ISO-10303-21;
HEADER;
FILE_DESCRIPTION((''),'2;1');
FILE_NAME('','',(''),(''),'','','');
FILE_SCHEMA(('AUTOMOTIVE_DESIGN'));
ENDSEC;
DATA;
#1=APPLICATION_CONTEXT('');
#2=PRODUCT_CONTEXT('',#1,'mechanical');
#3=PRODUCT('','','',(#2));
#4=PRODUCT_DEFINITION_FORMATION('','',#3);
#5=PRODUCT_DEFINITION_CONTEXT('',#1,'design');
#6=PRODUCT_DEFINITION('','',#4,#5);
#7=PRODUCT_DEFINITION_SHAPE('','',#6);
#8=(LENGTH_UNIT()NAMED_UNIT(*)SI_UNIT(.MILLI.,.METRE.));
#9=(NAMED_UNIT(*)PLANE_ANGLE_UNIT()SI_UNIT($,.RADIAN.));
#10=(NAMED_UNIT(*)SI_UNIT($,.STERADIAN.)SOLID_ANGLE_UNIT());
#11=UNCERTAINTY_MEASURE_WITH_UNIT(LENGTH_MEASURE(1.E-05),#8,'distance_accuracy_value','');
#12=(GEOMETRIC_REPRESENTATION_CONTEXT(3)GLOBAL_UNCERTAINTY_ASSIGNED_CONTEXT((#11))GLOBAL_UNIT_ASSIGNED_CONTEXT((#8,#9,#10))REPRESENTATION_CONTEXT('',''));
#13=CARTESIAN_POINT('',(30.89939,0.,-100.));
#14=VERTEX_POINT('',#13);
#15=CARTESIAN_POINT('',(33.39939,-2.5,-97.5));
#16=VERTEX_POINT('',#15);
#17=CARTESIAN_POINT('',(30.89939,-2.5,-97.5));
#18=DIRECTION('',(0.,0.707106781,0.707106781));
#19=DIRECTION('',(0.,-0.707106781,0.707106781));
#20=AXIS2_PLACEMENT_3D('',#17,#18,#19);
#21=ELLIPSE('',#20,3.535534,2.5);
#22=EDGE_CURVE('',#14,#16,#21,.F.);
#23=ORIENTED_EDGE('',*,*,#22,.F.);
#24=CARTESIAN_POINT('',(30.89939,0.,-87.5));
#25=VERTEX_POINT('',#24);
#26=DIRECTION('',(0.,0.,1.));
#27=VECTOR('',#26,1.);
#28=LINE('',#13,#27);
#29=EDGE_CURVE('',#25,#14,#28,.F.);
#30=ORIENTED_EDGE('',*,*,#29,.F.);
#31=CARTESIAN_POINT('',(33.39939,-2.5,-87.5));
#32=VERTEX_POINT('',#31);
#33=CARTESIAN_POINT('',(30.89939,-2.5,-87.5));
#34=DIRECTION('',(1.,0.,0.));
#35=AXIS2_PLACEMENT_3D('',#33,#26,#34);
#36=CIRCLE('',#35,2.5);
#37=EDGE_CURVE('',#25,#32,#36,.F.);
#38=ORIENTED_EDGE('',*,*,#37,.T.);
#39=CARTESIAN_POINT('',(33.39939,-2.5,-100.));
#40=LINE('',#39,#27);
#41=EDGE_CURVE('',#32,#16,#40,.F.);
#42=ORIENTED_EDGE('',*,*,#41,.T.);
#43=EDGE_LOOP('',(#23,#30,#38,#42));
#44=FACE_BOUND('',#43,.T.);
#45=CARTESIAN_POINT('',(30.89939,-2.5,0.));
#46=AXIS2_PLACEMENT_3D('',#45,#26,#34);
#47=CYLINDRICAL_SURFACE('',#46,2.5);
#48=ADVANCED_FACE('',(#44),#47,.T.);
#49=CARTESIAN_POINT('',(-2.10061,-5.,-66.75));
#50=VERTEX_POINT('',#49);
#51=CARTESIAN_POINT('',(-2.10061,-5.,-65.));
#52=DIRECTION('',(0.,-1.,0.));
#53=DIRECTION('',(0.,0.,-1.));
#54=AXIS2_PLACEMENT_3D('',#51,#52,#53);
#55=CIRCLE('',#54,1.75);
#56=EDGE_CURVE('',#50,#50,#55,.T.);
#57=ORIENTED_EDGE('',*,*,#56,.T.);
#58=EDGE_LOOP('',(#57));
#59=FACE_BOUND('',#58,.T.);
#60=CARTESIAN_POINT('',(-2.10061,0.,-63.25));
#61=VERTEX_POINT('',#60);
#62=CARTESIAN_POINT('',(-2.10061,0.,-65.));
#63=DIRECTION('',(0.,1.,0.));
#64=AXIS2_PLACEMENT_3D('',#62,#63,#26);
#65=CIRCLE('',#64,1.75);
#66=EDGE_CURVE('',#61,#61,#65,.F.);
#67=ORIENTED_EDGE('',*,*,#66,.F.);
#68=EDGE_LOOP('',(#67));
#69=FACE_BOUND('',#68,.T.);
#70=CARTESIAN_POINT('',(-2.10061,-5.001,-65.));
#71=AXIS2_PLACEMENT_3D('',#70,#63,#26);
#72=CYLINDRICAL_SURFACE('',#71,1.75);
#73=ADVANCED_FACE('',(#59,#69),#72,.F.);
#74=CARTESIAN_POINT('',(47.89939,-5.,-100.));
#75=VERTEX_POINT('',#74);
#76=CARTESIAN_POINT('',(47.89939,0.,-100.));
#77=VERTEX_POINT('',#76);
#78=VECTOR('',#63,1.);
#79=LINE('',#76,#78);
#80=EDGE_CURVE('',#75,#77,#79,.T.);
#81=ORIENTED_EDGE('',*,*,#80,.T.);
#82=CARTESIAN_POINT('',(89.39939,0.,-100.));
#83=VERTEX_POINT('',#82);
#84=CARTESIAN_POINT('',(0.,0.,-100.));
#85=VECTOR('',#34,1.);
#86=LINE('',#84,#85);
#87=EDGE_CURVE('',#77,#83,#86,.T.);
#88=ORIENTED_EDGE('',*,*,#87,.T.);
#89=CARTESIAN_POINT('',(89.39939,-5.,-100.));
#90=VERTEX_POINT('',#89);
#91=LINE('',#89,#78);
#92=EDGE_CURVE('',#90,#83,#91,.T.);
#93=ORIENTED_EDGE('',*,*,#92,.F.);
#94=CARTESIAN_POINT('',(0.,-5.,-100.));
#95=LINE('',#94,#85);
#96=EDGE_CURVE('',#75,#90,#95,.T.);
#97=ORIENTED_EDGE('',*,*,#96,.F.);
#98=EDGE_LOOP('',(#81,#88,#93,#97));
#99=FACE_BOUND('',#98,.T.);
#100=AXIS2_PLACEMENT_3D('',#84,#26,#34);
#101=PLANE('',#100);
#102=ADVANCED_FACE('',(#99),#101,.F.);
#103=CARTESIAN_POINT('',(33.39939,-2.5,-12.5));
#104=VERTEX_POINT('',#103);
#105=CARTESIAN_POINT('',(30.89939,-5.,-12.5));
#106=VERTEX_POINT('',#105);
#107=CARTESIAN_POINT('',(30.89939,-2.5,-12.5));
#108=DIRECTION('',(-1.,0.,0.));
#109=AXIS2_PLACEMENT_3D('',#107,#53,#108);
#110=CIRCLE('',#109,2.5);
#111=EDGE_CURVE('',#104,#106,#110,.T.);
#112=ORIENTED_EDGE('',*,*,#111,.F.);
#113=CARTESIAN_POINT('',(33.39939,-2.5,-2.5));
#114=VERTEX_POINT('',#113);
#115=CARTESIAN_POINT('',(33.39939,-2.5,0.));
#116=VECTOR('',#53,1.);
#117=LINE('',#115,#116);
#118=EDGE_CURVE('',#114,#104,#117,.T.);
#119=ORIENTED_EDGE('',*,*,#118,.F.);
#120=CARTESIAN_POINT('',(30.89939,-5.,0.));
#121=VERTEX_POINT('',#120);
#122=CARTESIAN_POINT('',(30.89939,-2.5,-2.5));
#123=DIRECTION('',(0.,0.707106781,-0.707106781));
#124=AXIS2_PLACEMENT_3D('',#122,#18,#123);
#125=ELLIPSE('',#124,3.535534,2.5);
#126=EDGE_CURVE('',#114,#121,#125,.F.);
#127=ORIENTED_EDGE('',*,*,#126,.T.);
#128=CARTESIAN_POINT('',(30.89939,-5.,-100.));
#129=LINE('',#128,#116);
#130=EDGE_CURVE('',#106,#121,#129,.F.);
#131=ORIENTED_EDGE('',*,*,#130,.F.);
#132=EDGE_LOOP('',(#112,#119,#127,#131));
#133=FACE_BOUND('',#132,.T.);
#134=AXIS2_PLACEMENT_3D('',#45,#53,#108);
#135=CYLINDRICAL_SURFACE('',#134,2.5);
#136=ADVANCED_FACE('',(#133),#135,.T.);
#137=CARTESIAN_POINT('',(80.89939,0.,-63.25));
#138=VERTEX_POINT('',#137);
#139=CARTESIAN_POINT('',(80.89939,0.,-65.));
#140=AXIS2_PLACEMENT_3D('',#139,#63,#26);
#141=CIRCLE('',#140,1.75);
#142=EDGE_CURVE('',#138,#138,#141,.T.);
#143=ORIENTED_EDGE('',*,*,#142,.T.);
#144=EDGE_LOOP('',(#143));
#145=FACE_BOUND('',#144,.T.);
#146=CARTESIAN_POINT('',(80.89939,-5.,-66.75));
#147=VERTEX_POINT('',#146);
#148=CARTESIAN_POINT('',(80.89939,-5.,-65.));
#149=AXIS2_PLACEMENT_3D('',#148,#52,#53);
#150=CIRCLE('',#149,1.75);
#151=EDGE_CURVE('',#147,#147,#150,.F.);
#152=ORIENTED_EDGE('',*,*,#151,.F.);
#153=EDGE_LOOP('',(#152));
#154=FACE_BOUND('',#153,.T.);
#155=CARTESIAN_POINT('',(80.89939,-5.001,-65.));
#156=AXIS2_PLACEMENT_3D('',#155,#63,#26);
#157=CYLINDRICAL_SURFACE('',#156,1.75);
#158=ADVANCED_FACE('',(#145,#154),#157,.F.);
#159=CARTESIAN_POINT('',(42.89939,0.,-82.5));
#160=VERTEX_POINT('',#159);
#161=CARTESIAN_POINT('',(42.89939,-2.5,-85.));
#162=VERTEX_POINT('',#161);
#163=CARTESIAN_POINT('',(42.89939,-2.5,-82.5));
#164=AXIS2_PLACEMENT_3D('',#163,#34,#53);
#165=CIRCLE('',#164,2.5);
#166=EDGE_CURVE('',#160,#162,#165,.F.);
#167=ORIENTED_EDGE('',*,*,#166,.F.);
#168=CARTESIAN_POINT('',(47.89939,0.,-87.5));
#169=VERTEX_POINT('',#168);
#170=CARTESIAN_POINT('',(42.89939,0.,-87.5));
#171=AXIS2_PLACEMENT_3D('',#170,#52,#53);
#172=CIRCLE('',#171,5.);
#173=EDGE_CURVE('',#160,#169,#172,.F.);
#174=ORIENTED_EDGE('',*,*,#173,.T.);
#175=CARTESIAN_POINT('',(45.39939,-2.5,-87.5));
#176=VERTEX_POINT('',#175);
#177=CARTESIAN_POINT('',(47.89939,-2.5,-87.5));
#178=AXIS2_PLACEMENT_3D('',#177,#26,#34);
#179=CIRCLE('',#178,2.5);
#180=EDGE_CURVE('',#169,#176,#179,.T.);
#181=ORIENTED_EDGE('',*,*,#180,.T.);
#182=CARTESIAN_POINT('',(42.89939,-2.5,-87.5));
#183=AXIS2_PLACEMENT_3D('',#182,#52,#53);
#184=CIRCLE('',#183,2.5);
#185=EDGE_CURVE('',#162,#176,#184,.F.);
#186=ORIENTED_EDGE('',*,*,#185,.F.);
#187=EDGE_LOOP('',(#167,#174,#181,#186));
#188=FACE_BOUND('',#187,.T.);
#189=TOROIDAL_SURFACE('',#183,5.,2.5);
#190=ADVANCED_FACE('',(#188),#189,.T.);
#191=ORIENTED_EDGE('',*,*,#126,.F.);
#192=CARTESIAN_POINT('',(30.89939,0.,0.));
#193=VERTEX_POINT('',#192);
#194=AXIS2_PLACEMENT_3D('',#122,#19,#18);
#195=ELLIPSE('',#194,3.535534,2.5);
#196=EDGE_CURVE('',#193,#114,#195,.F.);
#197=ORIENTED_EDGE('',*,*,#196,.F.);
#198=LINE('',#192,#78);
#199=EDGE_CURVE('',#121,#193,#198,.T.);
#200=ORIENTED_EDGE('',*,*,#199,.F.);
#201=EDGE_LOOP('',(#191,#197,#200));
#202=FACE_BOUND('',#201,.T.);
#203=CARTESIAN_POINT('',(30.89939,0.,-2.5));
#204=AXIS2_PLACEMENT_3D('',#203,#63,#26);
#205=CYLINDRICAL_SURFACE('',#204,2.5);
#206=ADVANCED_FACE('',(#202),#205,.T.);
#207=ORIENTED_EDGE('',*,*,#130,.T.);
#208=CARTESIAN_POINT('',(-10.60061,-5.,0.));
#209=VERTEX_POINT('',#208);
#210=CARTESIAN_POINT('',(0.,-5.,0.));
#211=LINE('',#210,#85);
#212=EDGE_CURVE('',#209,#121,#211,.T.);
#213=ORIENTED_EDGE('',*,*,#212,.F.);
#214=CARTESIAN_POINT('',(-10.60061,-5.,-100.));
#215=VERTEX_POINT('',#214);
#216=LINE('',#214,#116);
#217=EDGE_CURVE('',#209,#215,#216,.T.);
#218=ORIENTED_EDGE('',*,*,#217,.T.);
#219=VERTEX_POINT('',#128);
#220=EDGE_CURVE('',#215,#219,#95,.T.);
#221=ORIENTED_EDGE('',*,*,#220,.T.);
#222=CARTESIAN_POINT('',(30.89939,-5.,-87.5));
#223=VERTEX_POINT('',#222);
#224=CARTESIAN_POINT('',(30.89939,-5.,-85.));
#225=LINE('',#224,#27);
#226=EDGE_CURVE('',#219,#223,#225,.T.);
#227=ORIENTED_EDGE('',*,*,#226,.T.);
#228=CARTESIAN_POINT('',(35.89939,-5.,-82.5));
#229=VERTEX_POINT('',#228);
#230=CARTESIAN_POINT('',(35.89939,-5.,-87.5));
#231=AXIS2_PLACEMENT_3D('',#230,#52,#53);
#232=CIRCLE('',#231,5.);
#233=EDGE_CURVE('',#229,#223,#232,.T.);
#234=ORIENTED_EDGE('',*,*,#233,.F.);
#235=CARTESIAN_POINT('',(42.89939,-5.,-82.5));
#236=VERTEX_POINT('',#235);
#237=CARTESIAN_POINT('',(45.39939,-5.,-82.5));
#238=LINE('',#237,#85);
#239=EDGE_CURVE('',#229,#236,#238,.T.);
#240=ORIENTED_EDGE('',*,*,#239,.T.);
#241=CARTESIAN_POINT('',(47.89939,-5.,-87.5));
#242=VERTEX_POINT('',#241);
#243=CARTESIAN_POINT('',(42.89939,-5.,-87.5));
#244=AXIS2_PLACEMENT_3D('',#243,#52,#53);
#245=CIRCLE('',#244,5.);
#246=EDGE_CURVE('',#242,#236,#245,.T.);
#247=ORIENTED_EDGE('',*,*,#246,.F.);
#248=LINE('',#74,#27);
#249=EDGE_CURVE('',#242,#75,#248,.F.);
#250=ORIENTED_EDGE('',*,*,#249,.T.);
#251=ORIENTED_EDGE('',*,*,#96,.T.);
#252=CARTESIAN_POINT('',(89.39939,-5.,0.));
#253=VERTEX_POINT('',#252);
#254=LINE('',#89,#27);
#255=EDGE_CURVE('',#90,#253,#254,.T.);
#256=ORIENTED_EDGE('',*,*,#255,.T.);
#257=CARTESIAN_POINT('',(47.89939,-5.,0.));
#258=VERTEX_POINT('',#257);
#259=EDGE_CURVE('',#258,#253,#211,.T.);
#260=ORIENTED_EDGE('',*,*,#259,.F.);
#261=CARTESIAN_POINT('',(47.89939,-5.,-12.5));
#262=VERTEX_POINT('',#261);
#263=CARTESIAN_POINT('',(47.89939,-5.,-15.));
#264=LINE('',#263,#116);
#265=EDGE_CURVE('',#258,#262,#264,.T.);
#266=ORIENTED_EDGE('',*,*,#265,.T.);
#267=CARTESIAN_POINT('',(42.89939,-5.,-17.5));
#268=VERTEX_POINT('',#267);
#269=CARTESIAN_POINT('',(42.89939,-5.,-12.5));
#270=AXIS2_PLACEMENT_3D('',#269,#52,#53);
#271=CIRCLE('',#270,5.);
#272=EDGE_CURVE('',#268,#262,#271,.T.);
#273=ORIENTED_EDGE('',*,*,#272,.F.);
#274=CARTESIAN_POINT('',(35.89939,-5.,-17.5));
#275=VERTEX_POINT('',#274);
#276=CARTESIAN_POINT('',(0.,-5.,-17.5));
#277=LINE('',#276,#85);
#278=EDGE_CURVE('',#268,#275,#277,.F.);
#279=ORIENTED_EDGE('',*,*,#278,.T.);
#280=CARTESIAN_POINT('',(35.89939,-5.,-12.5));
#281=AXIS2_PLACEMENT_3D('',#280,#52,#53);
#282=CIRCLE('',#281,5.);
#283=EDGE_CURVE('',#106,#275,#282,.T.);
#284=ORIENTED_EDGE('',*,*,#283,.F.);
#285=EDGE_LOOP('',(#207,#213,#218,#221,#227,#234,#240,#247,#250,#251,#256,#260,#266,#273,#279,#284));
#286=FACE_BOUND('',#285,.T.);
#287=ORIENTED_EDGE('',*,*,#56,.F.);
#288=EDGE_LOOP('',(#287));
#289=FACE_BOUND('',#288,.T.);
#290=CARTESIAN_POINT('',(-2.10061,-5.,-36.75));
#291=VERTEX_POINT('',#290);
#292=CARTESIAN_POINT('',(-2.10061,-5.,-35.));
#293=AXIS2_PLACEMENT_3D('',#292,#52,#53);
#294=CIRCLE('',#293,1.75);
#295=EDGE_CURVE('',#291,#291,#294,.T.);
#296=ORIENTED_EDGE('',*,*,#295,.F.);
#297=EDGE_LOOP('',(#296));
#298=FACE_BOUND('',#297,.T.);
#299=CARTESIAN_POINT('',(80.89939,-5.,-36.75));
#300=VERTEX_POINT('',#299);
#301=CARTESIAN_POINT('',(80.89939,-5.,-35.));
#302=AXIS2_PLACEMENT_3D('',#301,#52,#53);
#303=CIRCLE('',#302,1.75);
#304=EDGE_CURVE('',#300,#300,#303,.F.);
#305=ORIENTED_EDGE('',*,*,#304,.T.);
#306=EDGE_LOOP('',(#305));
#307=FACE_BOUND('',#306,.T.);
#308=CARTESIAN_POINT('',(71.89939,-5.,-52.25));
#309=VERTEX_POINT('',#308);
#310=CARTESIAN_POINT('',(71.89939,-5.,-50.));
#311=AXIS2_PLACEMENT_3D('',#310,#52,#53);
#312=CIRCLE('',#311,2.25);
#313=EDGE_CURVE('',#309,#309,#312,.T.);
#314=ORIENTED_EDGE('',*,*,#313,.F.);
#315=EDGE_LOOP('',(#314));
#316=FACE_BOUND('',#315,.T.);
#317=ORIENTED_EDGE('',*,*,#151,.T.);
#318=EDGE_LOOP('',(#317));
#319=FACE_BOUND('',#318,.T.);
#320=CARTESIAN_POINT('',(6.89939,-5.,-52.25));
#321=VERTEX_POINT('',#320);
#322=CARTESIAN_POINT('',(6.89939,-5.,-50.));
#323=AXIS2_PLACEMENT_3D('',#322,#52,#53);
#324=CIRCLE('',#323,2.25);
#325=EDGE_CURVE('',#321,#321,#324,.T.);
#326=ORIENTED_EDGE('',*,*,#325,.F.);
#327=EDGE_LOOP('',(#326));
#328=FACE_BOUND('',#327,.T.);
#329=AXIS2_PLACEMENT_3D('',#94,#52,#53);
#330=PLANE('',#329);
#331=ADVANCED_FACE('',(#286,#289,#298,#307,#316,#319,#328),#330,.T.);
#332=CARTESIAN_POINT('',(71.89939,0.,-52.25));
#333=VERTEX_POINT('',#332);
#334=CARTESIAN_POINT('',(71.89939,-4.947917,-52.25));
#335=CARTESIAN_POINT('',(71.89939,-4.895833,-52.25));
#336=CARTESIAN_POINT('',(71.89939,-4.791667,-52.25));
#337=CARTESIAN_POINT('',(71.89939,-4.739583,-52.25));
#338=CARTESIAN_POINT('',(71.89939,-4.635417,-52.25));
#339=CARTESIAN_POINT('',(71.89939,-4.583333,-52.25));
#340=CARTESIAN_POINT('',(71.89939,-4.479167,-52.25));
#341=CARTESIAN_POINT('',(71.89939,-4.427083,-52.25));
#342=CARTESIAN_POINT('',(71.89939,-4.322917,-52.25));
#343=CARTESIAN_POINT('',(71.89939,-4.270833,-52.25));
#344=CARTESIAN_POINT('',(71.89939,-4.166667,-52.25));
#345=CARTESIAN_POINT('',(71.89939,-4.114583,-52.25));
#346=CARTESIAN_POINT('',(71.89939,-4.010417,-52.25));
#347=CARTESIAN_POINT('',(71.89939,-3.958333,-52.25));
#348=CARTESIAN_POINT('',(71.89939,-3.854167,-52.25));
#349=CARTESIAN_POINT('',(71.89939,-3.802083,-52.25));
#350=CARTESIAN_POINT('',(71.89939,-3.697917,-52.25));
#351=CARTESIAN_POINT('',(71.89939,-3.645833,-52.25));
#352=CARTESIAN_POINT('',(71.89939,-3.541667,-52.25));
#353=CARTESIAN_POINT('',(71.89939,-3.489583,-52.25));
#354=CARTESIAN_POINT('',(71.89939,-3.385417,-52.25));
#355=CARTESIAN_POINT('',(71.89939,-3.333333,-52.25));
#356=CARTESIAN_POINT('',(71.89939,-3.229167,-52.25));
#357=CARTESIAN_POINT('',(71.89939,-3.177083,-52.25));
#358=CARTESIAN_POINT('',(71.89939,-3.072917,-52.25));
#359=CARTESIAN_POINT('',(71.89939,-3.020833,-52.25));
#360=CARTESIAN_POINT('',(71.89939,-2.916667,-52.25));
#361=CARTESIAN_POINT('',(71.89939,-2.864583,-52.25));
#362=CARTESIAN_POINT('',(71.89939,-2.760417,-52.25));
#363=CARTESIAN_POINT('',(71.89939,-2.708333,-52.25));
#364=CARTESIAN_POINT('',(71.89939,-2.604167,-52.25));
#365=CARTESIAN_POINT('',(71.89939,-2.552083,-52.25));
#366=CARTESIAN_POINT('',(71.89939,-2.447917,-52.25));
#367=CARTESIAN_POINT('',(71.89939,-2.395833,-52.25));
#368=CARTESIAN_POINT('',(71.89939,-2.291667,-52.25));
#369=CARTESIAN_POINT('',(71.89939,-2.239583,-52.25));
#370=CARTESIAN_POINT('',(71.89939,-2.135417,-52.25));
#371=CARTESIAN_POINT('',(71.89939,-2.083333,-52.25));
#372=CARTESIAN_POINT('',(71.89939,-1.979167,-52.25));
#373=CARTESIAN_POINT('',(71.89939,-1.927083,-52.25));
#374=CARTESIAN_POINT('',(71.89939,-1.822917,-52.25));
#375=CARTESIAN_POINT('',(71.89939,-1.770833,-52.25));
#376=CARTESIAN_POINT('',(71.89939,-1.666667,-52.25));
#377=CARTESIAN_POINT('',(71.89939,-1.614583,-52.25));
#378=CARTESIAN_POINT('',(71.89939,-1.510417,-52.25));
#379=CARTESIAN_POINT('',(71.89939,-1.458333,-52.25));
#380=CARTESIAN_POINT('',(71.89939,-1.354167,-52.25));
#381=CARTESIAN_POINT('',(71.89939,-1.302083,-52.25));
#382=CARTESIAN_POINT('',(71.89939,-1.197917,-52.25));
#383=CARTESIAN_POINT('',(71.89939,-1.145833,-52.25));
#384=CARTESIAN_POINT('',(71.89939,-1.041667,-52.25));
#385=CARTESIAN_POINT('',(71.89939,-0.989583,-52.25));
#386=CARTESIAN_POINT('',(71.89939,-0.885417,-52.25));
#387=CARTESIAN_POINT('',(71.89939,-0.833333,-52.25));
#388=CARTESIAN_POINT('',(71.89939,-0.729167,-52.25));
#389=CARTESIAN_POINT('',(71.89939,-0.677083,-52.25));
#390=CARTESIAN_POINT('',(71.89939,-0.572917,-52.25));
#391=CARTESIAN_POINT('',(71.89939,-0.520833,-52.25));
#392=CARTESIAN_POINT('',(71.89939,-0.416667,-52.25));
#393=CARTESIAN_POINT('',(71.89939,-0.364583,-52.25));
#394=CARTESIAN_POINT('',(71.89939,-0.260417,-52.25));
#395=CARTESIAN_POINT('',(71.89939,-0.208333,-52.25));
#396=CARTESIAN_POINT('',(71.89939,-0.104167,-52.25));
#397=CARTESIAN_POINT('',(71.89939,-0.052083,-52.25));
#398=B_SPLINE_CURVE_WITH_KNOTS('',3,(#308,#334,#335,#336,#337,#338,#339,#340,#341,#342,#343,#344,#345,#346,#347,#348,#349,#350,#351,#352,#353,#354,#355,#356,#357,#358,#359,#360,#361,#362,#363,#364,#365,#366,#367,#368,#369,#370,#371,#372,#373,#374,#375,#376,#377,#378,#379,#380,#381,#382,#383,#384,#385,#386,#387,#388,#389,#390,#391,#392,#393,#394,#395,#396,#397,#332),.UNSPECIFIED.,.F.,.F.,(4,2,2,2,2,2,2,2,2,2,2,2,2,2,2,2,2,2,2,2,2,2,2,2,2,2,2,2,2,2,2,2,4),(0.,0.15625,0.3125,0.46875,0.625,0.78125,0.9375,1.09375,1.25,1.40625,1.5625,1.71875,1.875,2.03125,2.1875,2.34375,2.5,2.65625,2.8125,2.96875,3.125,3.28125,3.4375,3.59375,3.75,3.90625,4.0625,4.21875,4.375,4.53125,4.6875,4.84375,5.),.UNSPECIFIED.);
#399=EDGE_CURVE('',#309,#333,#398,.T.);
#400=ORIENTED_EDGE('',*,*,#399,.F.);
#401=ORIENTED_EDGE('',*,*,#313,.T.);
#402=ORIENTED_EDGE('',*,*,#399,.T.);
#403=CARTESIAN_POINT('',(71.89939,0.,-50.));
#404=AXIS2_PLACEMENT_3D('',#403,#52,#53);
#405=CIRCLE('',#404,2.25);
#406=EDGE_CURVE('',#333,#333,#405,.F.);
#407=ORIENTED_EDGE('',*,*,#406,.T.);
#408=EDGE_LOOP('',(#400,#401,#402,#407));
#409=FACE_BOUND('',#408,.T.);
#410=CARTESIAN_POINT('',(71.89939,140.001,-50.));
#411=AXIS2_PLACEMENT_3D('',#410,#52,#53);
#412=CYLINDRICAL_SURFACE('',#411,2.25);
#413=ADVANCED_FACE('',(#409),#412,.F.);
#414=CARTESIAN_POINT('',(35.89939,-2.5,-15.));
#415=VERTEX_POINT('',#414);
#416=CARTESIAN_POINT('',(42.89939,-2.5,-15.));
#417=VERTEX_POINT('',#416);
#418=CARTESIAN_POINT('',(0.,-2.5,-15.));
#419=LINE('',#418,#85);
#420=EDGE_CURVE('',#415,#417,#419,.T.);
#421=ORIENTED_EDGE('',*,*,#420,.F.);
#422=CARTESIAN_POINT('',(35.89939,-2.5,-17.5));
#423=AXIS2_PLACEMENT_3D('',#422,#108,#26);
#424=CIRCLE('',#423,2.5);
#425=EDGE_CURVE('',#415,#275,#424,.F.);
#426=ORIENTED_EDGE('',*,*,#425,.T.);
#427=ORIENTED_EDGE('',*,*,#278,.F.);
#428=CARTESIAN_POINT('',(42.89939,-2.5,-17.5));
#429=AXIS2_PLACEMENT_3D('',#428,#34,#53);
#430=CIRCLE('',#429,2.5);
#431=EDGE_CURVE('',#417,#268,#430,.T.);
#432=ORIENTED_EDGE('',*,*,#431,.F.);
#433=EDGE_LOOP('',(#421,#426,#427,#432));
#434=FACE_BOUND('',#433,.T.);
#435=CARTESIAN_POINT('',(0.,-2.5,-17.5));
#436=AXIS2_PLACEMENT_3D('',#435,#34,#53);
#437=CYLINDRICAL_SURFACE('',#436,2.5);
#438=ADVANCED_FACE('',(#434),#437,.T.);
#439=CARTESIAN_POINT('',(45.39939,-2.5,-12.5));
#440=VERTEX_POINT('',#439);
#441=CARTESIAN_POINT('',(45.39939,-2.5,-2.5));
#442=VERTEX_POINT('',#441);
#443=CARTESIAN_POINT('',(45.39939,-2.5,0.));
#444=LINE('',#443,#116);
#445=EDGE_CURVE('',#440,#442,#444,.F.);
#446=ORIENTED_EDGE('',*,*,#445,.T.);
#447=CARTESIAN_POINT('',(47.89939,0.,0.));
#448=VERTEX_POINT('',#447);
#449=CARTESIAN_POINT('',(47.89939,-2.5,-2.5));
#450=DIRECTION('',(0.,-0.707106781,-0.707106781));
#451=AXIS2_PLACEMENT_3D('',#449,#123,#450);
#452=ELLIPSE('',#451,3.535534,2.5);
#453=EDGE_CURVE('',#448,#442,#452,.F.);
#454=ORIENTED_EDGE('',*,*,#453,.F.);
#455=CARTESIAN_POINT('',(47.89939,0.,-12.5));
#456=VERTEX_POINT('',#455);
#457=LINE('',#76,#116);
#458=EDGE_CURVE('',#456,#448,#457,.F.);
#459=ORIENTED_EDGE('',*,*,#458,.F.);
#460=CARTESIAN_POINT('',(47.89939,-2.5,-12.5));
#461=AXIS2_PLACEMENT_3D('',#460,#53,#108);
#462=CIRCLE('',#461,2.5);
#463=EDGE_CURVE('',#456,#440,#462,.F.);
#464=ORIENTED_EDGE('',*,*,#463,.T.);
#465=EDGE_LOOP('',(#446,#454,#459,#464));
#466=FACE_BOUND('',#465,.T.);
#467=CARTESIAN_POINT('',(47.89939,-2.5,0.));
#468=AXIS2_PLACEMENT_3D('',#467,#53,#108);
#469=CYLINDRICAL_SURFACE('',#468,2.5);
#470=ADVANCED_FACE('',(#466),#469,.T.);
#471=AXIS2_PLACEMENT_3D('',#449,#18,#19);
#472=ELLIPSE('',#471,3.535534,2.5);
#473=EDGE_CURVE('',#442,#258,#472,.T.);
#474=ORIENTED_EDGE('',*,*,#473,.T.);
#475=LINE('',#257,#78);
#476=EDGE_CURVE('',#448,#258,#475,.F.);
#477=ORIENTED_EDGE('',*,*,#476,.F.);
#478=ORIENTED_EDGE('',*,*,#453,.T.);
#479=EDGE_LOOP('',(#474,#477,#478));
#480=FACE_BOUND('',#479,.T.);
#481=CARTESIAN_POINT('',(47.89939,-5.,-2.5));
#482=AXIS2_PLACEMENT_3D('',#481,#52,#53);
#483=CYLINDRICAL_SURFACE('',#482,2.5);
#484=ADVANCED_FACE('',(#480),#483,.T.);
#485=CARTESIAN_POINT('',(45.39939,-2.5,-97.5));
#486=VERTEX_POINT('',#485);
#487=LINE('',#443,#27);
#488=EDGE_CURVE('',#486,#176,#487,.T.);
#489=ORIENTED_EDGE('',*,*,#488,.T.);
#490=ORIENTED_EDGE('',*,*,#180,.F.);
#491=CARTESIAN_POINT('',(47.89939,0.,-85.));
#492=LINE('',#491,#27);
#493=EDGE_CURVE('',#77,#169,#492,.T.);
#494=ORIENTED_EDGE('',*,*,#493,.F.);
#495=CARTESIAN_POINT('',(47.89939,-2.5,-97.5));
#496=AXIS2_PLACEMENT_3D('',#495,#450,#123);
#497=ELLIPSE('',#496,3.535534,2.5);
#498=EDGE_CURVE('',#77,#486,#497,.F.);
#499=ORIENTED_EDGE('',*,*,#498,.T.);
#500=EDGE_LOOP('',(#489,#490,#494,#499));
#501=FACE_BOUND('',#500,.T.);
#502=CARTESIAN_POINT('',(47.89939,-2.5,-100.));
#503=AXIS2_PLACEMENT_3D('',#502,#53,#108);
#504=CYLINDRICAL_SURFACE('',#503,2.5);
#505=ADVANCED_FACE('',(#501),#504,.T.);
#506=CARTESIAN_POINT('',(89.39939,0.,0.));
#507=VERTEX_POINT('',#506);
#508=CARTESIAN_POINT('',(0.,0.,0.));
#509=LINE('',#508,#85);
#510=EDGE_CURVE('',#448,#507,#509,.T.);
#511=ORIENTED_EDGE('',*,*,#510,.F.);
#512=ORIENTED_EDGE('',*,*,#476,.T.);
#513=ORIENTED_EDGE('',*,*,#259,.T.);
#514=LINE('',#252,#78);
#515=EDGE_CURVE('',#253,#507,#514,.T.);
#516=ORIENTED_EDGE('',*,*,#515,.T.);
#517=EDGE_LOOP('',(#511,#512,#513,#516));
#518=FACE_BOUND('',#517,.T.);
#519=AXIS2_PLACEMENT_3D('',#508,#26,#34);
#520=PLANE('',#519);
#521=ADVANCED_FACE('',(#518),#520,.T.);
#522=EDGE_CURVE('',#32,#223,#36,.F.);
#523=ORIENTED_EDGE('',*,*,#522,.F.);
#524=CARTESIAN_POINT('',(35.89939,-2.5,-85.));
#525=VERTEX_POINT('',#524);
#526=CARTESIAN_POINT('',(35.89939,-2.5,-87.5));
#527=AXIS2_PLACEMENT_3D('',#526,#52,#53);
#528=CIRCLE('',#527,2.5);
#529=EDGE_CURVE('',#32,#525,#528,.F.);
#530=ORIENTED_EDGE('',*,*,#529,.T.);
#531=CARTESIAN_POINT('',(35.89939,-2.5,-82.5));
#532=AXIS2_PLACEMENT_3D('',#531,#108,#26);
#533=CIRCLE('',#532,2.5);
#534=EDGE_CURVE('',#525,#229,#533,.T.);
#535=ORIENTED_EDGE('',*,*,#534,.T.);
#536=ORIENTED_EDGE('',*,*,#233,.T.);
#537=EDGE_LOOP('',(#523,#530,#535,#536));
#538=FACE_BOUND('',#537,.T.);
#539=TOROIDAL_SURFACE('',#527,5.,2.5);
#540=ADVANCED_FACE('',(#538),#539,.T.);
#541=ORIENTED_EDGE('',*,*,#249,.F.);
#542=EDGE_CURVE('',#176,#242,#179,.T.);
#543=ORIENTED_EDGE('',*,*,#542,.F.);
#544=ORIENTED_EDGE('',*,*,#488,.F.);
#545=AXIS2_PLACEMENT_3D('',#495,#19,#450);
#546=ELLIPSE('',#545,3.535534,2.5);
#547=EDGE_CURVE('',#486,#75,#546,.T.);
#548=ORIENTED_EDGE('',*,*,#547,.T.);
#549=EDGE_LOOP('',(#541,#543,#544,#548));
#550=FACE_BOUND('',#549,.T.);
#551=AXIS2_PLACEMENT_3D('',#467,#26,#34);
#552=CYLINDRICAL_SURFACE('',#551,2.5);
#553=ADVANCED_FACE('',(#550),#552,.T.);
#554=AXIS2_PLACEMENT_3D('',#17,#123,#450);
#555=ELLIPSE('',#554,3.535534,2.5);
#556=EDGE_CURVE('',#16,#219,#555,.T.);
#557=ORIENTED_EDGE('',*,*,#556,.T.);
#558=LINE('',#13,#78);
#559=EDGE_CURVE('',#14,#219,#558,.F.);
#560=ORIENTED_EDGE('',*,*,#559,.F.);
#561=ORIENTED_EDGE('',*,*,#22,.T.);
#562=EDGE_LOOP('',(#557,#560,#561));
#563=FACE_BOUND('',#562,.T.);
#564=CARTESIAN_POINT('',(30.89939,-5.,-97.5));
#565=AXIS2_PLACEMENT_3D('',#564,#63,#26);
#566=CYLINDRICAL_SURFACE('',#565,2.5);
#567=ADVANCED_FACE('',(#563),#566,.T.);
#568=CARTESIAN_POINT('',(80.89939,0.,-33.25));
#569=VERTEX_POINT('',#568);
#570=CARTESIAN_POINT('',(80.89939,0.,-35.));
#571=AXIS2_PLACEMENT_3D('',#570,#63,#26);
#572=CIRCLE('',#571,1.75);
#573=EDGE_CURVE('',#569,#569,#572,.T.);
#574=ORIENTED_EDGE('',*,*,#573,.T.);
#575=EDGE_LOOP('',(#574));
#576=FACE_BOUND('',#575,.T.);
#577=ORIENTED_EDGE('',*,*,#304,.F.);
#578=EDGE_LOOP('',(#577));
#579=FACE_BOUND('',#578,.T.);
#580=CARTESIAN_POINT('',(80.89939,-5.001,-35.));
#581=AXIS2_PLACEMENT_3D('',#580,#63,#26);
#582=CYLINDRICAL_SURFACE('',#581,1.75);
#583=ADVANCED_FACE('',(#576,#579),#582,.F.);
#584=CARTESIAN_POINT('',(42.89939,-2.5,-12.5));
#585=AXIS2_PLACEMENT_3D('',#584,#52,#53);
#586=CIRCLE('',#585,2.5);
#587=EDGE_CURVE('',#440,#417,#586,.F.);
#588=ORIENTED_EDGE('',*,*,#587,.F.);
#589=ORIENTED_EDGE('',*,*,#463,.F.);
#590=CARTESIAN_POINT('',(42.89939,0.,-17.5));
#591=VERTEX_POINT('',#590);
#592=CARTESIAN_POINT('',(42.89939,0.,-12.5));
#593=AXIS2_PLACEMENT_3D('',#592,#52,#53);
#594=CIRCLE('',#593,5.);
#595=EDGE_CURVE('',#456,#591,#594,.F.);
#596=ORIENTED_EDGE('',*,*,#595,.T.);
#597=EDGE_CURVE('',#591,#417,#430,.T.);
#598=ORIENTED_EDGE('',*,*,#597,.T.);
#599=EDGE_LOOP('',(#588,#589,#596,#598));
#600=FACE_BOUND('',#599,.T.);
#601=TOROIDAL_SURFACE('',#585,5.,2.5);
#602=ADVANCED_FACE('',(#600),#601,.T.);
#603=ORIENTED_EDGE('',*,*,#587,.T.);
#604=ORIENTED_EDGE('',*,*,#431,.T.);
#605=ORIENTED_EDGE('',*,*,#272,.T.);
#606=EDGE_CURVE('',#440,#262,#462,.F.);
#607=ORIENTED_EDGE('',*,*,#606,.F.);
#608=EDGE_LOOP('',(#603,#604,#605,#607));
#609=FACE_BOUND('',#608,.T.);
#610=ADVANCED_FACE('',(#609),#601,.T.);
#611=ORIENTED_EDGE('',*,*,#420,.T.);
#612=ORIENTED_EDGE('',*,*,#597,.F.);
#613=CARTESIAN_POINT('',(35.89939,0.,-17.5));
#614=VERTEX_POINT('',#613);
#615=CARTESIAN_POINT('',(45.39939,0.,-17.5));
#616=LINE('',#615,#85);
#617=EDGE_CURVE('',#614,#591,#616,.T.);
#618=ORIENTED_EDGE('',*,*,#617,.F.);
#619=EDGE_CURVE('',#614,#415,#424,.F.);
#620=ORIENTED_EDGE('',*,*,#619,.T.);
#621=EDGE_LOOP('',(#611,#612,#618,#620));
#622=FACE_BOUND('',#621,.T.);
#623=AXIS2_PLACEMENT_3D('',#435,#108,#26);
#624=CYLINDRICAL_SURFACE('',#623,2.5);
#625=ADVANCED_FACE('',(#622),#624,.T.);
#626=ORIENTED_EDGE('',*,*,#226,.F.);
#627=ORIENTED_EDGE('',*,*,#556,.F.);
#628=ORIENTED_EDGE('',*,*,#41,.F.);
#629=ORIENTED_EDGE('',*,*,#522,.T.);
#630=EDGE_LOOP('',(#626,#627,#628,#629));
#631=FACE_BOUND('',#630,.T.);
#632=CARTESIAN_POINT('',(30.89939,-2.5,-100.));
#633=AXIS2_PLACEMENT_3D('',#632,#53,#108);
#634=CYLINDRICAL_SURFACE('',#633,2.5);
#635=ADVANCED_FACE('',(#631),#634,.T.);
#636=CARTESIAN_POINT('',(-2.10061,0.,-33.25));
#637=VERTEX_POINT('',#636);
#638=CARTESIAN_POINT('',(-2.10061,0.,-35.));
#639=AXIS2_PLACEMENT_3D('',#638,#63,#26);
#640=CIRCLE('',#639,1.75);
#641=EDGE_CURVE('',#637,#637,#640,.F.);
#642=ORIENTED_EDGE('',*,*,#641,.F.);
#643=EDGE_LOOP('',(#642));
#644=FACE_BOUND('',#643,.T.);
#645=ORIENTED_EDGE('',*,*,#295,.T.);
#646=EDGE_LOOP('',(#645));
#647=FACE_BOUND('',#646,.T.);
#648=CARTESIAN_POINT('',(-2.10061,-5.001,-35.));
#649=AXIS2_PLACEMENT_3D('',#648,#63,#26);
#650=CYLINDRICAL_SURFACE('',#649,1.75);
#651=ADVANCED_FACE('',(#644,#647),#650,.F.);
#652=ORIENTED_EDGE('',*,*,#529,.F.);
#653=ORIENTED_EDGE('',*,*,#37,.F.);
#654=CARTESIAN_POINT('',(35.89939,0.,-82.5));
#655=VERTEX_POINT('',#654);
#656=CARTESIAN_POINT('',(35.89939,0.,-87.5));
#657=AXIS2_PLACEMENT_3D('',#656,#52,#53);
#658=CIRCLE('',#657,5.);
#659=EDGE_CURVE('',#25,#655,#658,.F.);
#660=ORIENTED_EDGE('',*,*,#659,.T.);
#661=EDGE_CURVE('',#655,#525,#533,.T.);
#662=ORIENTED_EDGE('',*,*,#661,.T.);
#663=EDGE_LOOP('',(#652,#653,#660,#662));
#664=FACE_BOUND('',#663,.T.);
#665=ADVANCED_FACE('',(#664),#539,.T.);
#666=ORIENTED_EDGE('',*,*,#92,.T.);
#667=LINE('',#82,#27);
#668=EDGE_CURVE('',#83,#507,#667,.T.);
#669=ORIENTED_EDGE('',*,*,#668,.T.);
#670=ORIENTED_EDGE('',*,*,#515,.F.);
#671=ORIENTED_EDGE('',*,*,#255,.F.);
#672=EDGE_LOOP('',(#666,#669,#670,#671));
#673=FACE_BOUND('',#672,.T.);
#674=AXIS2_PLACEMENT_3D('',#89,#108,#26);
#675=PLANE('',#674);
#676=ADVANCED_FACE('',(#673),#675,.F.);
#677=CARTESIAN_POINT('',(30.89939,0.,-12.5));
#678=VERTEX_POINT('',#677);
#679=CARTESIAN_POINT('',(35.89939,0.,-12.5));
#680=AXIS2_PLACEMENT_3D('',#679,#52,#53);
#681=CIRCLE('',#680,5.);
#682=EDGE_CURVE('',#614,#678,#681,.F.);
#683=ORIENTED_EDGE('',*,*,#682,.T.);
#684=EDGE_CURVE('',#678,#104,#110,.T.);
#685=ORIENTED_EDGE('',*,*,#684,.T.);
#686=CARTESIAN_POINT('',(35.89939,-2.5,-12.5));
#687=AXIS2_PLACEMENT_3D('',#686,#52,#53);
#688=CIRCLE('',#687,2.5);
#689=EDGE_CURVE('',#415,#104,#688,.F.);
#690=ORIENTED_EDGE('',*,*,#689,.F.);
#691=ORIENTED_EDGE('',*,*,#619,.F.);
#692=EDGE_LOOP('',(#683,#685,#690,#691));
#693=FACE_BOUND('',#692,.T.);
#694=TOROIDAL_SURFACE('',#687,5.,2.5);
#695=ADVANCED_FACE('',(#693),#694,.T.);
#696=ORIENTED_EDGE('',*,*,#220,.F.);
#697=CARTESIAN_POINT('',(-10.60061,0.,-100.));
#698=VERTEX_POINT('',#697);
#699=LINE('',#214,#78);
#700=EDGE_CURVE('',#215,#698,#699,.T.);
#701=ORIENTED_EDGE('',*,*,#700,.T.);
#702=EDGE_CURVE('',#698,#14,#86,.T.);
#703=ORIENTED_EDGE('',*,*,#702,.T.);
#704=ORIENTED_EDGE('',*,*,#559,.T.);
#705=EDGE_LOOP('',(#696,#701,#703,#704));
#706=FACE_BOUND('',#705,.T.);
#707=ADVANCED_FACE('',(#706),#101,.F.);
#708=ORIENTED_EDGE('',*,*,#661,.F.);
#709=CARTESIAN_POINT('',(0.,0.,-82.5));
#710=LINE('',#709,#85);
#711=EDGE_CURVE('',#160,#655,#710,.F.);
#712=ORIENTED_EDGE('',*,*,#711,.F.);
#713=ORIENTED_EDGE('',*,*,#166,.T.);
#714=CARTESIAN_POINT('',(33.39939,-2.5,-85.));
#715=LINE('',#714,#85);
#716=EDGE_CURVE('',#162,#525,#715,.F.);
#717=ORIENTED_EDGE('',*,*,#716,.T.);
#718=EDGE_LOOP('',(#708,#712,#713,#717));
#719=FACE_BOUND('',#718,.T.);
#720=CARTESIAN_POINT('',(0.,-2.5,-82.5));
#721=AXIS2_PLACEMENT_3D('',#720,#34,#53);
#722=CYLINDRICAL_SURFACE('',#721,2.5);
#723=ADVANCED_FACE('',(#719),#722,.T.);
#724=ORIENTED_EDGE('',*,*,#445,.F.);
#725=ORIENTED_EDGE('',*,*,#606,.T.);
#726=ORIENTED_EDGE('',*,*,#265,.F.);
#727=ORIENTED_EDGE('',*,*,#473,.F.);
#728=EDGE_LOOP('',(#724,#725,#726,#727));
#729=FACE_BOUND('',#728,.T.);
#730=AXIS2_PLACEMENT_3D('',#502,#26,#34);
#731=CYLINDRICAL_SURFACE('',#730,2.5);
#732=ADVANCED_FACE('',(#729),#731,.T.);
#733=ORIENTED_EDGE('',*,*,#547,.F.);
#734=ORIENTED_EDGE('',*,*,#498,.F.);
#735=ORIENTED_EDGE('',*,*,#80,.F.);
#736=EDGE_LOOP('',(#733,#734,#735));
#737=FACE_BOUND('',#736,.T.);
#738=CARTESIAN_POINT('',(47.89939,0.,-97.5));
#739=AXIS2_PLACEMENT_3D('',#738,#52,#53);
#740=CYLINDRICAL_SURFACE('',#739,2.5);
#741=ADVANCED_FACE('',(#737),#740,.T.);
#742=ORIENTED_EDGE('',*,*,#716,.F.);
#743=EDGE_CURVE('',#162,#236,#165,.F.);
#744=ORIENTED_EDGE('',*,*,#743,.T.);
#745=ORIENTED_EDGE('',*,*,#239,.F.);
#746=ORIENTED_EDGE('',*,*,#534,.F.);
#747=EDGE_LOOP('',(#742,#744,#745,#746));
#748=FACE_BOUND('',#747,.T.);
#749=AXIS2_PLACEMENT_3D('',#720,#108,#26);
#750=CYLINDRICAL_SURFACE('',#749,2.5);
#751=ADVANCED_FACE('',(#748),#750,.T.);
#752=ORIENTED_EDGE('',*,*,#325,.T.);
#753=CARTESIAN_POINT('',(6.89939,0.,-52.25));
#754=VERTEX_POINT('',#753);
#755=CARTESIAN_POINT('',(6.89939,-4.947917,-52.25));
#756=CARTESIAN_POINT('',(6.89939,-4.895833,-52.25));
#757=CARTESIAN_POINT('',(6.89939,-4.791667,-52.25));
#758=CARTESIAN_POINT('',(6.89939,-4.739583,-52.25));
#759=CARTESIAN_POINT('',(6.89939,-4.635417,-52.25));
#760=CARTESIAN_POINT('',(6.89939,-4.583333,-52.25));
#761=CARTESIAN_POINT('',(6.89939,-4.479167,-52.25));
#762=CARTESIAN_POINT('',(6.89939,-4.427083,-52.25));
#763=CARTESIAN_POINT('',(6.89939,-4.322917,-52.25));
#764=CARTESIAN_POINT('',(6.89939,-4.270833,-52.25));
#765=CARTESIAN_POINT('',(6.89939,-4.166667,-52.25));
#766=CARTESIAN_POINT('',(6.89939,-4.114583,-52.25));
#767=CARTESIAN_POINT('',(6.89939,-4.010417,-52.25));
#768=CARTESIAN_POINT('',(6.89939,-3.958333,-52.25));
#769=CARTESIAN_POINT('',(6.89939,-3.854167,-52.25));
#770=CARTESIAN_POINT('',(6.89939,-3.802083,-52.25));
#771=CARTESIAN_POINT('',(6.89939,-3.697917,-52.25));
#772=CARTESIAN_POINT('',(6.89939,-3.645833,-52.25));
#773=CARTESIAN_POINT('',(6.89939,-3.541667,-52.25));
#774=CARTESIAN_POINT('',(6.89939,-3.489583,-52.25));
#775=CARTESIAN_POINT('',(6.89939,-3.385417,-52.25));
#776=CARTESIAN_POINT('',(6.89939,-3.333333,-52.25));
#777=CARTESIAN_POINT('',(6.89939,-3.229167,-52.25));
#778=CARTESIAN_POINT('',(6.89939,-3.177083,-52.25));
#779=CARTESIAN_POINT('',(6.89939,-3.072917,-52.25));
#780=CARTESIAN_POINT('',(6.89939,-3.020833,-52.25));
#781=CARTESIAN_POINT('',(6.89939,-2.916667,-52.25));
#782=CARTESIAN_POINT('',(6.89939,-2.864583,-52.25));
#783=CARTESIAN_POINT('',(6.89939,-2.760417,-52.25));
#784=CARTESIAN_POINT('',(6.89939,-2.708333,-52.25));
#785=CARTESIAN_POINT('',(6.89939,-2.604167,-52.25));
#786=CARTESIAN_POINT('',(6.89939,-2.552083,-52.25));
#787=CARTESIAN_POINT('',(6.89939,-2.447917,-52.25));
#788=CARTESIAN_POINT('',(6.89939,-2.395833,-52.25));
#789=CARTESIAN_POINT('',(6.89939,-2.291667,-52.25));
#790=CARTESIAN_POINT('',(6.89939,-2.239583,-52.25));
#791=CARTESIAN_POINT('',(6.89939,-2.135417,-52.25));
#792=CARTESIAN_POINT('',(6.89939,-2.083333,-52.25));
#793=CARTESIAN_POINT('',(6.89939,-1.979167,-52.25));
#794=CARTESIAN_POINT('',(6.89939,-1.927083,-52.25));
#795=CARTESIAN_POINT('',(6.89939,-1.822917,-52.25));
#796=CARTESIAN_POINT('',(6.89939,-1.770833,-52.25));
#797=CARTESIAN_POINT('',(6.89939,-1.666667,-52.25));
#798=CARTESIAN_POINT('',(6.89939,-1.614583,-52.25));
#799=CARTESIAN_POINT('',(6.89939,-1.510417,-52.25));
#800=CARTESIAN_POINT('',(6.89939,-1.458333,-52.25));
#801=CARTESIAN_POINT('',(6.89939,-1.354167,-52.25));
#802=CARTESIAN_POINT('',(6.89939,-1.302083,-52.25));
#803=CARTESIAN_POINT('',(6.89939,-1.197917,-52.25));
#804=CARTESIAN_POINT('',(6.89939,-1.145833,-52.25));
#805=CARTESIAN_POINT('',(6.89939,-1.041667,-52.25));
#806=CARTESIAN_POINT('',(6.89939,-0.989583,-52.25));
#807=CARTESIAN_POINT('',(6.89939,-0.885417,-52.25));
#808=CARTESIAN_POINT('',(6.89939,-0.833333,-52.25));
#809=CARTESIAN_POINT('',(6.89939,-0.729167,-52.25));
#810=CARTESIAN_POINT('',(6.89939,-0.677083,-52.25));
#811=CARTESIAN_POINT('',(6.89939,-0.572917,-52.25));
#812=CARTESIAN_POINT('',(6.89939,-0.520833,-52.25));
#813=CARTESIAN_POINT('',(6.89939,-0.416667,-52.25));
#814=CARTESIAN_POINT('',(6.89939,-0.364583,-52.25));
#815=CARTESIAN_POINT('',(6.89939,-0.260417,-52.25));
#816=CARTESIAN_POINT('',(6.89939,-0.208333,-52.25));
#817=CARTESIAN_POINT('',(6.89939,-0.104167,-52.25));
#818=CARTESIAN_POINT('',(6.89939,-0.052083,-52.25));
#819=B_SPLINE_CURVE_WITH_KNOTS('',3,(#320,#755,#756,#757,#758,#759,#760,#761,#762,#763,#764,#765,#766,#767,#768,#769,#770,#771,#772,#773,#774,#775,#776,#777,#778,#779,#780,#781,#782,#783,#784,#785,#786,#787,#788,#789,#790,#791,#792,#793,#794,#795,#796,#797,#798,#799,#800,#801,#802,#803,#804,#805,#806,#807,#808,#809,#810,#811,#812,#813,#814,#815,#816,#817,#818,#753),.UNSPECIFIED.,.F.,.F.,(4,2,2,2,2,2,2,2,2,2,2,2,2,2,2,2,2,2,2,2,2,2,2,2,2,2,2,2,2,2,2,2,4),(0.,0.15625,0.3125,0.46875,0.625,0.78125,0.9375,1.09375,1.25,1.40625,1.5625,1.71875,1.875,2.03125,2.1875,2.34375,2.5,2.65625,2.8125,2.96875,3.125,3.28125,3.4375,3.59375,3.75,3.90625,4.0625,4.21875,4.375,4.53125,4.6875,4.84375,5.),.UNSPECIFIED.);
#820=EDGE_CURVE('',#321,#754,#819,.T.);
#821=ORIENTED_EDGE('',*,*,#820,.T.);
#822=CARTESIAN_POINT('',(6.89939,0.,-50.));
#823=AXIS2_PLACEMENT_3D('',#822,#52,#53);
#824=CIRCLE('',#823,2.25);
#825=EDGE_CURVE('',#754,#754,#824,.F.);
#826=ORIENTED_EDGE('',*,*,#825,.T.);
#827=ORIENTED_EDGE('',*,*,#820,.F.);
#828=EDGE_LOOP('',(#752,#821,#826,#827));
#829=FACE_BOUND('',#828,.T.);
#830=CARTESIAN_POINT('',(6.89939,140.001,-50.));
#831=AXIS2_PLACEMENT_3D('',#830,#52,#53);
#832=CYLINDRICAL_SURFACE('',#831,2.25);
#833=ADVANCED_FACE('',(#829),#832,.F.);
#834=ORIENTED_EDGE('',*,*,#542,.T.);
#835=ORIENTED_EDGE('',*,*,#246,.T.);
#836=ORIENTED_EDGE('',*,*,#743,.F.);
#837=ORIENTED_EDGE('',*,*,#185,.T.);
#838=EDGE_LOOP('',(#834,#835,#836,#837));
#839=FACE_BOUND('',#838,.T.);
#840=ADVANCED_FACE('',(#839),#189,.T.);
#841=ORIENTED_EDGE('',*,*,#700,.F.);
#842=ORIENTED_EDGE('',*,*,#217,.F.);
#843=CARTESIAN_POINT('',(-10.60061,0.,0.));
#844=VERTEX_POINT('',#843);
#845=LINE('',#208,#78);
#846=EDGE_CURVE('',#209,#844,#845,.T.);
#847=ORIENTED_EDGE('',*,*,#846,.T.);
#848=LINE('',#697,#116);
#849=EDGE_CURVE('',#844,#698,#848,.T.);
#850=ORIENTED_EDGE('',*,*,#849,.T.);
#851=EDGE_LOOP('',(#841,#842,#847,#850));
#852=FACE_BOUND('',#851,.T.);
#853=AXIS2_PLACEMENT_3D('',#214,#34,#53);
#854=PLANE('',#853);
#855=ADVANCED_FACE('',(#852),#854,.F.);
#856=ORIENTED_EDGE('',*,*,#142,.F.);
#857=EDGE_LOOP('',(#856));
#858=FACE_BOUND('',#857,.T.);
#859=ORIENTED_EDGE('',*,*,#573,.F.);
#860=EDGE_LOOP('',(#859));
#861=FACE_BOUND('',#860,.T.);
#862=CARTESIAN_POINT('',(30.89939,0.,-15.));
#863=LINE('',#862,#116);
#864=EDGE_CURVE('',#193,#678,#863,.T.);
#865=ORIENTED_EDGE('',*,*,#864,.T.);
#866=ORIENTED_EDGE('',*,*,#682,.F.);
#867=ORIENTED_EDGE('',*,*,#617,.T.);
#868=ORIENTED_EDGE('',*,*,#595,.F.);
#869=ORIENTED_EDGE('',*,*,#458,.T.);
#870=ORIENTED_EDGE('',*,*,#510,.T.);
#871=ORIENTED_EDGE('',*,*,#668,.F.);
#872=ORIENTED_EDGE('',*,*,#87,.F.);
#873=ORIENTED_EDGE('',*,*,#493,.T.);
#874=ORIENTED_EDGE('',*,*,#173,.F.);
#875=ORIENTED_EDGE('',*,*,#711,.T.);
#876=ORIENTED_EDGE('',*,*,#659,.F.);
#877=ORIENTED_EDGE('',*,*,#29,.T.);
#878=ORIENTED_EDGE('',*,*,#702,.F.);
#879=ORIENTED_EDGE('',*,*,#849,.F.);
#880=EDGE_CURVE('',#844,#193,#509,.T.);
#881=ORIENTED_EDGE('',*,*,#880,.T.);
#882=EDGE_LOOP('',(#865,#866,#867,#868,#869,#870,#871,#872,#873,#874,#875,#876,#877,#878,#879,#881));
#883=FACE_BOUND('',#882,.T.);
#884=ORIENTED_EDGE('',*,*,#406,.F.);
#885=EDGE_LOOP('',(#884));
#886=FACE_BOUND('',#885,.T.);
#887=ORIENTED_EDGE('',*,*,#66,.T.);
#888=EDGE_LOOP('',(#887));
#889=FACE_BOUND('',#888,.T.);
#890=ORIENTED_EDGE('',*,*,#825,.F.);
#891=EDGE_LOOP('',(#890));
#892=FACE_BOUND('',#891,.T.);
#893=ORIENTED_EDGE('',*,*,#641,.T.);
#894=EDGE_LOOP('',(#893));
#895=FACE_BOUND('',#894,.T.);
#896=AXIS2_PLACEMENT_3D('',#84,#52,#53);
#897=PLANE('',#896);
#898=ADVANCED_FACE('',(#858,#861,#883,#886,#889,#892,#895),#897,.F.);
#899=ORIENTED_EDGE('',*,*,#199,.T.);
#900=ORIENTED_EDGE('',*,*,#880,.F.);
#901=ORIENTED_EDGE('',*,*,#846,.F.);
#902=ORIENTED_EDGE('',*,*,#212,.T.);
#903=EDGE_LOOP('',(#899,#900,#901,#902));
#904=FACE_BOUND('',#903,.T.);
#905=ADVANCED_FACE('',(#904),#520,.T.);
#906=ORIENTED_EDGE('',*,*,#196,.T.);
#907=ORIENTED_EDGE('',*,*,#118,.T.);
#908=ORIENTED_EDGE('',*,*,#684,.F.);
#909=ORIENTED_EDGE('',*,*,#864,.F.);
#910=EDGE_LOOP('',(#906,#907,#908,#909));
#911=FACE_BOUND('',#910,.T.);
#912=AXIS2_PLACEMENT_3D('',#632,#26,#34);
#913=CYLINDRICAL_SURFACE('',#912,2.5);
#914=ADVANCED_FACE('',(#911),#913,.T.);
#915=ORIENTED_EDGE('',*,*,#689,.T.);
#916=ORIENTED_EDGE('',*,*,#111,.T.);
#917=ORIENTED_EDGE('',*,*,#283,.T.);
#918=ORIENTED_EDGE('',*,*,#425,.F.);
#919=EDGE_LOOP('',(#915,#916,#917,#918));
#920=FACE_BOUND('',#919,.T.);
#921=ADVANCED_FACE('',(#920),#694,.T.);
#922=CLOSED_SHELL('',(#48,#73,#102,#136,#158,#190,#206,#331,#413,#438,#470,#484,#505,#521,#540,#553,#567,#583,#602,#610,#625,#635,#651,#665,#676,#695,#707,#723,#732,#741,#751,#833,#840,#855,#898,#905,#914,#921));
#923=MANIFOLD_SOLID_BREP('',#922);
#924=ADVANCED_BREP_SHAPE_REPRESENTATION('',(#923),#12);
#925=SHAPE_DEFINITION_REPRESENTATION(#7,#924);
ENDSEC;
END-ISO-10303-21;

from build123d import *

# Parameters (mm, degrees)
BOSS_EXTRUDE1_DEPTH            = 100
CUT_EXTRUDE3_DEPTH             = 202.556443707
CUT_EXTRUDE3_DEPTH_BACK        = 202.556443707
SKETCH4_4_R                    = 9.85
CUT_EXTRUDE4_DEPTH             = 3
CUT_EXTRUDE5_START             = 103
SKETCH4_6_R                    = 9.85
CUT_EXTRUDE5_DEPTH             = 103
CUT_EXTRUDE6_REACH             = 206.206
SKETCH5_R                      = 2.25
CUT_EXTRUDE6_DIRECTION_2_DEPTH = 205.205778567
CUT_EXTRUDE7_REACH             = 201.841
SKETCH6_R                      = 2.25
SKETCH7_W                      = 12
SKETCH7_H                      = 15
CUT_EXTRUDE8_DEPTH             = 197.242821038
FILLET3_R                      = 2.5
FILLET4_R                      = 2.5
FILLET6_R                      = 5
CUT_EXTRUDE9_DEPTH             = 197.242821038
CUT_EXTRUDE9_DEPTH_BACK        = 197.242821038
SKETCH8_W                      = 5
SKETCH8_H                      = 100
CUT_EXTRUDE10_REACH            = 136.228
SKETCH11_R                     = 1.75


with BuildPart() as part:
    # Sketch1 → Boss-Extrude1 (new body)
    with BuildSketch(Plane.XY):
        Polygon((-10.600610125, 140), (-15.600610125, 140), (-15.600610125, -5), (94.399389875, -5), (94.399389875, 140), (89.399389875, 140), (89.399389875, 0), (-10.600610125, 0), align=None)
    extrude(amount=-BOSS_EXTRUDE1_DEPTH)

    # Sketch4 → Cut-Extrude3 (cut, two sides: drawn at the far end of the back side and taken through both)
    with BuildSketch(Plane.ZY.offset(-89.399389875).offset(-CUT_EXTRUDE3_DEPTH_BACK)):
        with BuildLine():
            ThreePointArc((-89.05, 45), (-82.05, 38), (-75.05, 45))
            Line((-75.05, 45), (-82.05, 45))
            Line((-82.05, 45), (-89.05, 45))
        make_face()
        with BuildLine():
            Line((-82.05, 45), (-75.05, 45))
            ThreePointArc((-75.05, 45), (-82.05, 52), (-89.05, 45))
            Line((-89.05, 45), (-82.05, 45))
        make_face()
        with BuildLine():
            ThreePointArc((-57, 45), (-50, 38), (-43, 45))
            Line((-43, 45), (-50, 45))
            Line((-50, 45), (-57, 45))
        make_face()
        with BuildLine():
            Line((-50, 45), (-43, 45))
            ThreePointArc((-43, 45), (-50, 52), (-57, 45))
            Line((-57, 45), (-50, 45))
        make_face()
        with BuildLine():
            ThreePointArc((-24.95, 45), (-17.95, 38), (-10.95, 45))
            Line((-10.95, 45), (-17.95, 45))
            Line((-17.95, 45), (-24.95, 45))
        make_face()
        with BuildLine():
            Line((-17.95, 45), (-10.95, 45))
            ThreePointArc((-10.95, 45), (-17.95, 52), (-24.95, 45))
            Line((-24.95, 45), (-17.95, 45))
        make_face()
    extrude(amount=CUT_EXTRUDE3_DEPTH + CUT_EXTRUDE3_DEPTH_BACK, mode=Mode.SUBTRACT)

    # Sketch4<4> → Cut-Extrude4 (cut)
    with BuildSketch(Plane.ZY.offset(-89.399389875)):
        with Locations((-50, 45)):
            Circle(SKETCH4_4_R)
        with Locations((-82.05, 45)):
            Circle(SKETCH4_4_R)
        with Locations((-17.95, 45)):
            Circle(SKETCH4_4_R)
    extrude(amount=-CUT_EXTRUDE4_DEPTH, mode=Mode.SUBTRACT)

    # Sketch4<6> → Cut-Extrude5 (cut)
    with BuildSketch(Plane.ZY.offset(-89.399389875).offset(CUT_EXTRUDE5_START)):
        with Locations((-50, 45)):
            Circle(SKETCH4_6_R)
        with Locations((-82.05, 45)):
            Circle(SKETCH4_6_R)
        with Locations((-17.95, 45)):
            Circle(SKETCH4_6_R)
    extrude(amount=-CUT_EXTRUDE5_DEPTH, mode=Mode.SUBTRACT)

    # Sketch5 → Cut-Extrude6 (cut, up to next)
    with BuildSketch(Plane.ZY.offset(15.600610125), mode=Mode.PRIVATE) as cut_extrude6_sk1:
        with Locations(Location((-78.75, 119.5, 0), (0, 0, 90))):
            Circle(SKETCH5_R)
    cut_extrude6_tool1 = extrude(cut_extrude6_sk1.sketch, amount=-CUT_EXTRUDE6_REACH, mode=Mode.PRIVATE) & part.part
    # Sketch5 → Cut-Extrude6 (cut, up to next)
    with BuildSketch(Plane.ZY.offset(15.600610125), mode=Mode.PRIVATE) as cut_extrude6_sk2:
        with Locations(Location((-21.25, 119.5, 0), (0, 0, 90))):
            Circle(SKETCH5_R)
    cut_extrude6_tool2 = extrude(cut_extrude6_sk2.sketch, amount=-CUT_EXTRUDE6_REACH, mode=Mode.PRIVATE) & part.part
    add(cut_extrude6_tool1.solids().sort_by_distance((-15.60061, 119.5, -78.75))[0], mode=Mode.SUBTRACT)
    add(cut_extrude6_tool2.solids().sort_by_distance((-15.60061, 119.5, -21.25))[0], mode=Mode.SUBTRACT)

    # Sketch5 → Cut-Extrude6 direction 2 (cut)
    with BuildSketch(Plane.ZY.offset(15.600610125)):
        with Locations(Location((-78.75, 119.5, 0), (0, 0, 90))):
            Circle(SKETCH5_R)
        with Locations(Location((-21.25, 119.5, 0), (0, 0, 90))):
            Circle(SKETCH5_R)
    extrude(amount=CUT_EXTRUDE6_DIRECTION_2_DEPTH, mode=Mode.SUBTRACT)

    # Sketch6 → Cut-Extrude7 (cut, up to next)
    with BuildSketch(Plane.XZ.offset(5), mode=Mode.PRIVATE) as cut_extrude7_sk1:
        with Locations(Location((71.899389875, -50, 0), (0, 0, 270))):
            Circle(SKETCH6_R)
    cut_extrude7_tool1 = extrude(cut_extrude7_sk1.sketch, amount=-CUT_EXTRUDE7_REACH, mode=Mode.PRIVATE) & part.part
    # Sketch6 → Cut-Extrude7 (cut, up to next)
    with BuildSketch(Plane.XZ.offset(5), mode=Mode.PRIVATE) as cut_extrude7_sk2:
        with Locations(Location((6.899389875, -50, 0), (0, 0, 270))):
            Circle(SKETCH6_R)
    cut_extrude7_tool2 = extrude(cut_extrude7_sk2.sketch, amount=-CUT_EXTRUDE7_REACH, mode=Mode.PRIVATE) & part.part
    add(cut_extrude7_tool1.solids().sort_by_distance((71.89939, -5, -50))[0], mode=Mode.SUBTRACT)
    add(cut_extrude7_tool2.solids().sort_by_distance((6.89939, -5, -50))[0], mode=Mode.SUBTRACT)

    # Sketch7 → Cut-Extrude8 (cut, through all)
    with BuildSketch(Plane(origin=(0, 0, 0), x_dir=(1, 0, 0), z_dir=(0, 1, 0))):
        Polygon((45.399389875, 100), (39.399389875, 100), (33.399389875, 100), (33.399389875, 85), (45.399389875, 85), align=None)
        with Locations((39.399389875, 7.5)):
            Rectangle(SKETCH7_W, SKETCH7_H)
    extrude(amount=-CUT_EXTRUDE8_DEPTH, mode=Mode.SUBTRACT)

    # Fillet3
    fillet3_edges = [part.edges().sort_by_distance(p)[0] for p in [
        (33.399389875, 0, -7.5),
        (33.399389875, -2.5, 0),
        (39.399389875, 0, -15),
        (33.399389875, -2.5, -15),
        (45.399389875, -5, -7.5),
        (45.399389875, -2.5, -15),
        (45.399389875, -2.5, 0),
        (33.399389875, -5, -7.5),
        (39.399389875, -5, -15),
        (45.399389875, 0, -7.5),
    ]]
    fillet(fillet3_edges, radius=FILLET3_R - 0.0001)  # a hair under: the kernel refuses the full size

    # Fillet4
    fillet4_edges = [part.edges().sort_by_distance(p)[0] for p in [
        (45.399389875, 0, -92.5),
        (45.399389875, -2.5, -100),
        (39.399389875, -5, -85),
        (45.399389875, -2.5, -85),
        (33.399389875, -5, -92.5),
        (33.399389875, -2.5, -85),
        (33.399389875, -2.5, -100),
        (45.399389875, -5, -92.5),
        (33.399389875, 0, -92.5),
        (39.399389875, 0, -85),
    ]]
    fillet(fillet4_edges, radius=FILLET4_R - 0.0001)  # a hair under: the kernel refuses the full size

    # Fillet6
    fillet6_edges = [part.edges().sort_by_distance(p)[0] for p in [
        (91.899389875, 140, -100),
        (-13.100610125, 140, -100),
        (-13.100610125, 140, 0),
        (91.899389875, 140, 0),
    ]]
    fillet(fillet6_edges, radius=FILLET6_R)

    # Sketch8 → Cut-Extrude9 (cut, two sides: drawn at the far end of the back side and taken through both)
    with BuildSketch(Plane(origin=(0, 0, 0), x_dir=(1, 0, 0), z_dir=(0, 1, 0)).offset(-CUT_EXTRUDE9_DEPTH_BACK)):
        with Locations((-13.100610125, 50)):
            Rectangle(SKETCH8_W, SKETCH8_H)
        with Locations((91.899389875, 50)):
            Rectangle(SKETCH8_W, SKETCH8_H)
    extrude(amount=CUT_EXTRUDE9_DEPTH + CUT_EXTRUDE9_DEPTH_BACK, mode=Mode.SUBTRACT)

    # Sketch11 → Cut-Extrude10 (cut, up to next)
    with BuildSketch(Plane(origin=(0, 0, 0), x_dir=(1, 0, 0), z_dir=(0, 1, 0)), mode=Mode.PRIVATE) as cut_extrude10_sk1:
        with Locations(Location((80.899389875, 65, 0), (0, 0, 270))):
            Circle(SKETCH11_R)
    cut_extrude10_tool1 = extrude(cut_extrude10_sk1.sketch, amount=-CUT_EXTRUDE10_REACH, mode=Mode.PRIVATE) & part.part
    # Sketch11 → Cut-Extrude10 (cut, up to next)
    with BuildSketch(Plane(origin=(0, 0, 0), x_dir=(1, 0, 0), z_dir=(0, 1, 0)), mode=Mode.PRIVATE) as cut_extrude10_sk2:
        with Locations(Location((80.899389875, 35, 0), (0, 0, 270))):
            Circle(SKETCH11_R)
    cut_extrude10_tool2 = extrude(cut_extrude10_sk2.sketch, amount=-CUT_EXTRUDE10_REACH, mode=Mode.PRIVATE) & part.part
    # Sketch11 → Cut-Extrude10 (cut, up to next)
    with BuildSketch(Plane(origin=(0, 0, 0), x_dir=(1, 0, 0), z_dir=(0, 1, 0)), mode=Mode.PRIVATE) as cut_extrude10_sk3:
        with Locations(Location((-2.100610125, 35, 0), (0, 0, 270))):
            Circle(SKETCH11_R)
    cut_extrude10_tool3 = extrude(cut_extrude10_sk3.sketch, amount=-CUT_EXTRUDE10_REACH, mode=Mode.PRIVATE) & part.part
    # Sketch11 → Cut-Extrude10 (cut, up to next)
    with BuildSketch(Plane(origin=(0, 0, 0), x_dir=(1, 0, 0), z_dir=(0, 1, 0)), mode=Mode.PRIVATE) as cut_extrude10_sk4:
        with Locations(Location((-2.100610125, 65, 0), (0, 0, 270))):
            Circle(SKETCH11_R)
    cut_extrude10_tool4 = extrude(cut_extrude10_sk4.sketch, amount=-CUT_EXTRUDE10_REACH, mode=Mode.PRIVATE) & part.part
    add(cut_extrude10_tool1.solids().sort_by_distance((80.89939, 0, -65))[0], mode=Mode.SUBTRACT)
    add(cut_extrude10_tool2.solids().sort_by_distance((80.89939, 0, -35))[0], mode=Mode.SUBTRACT)
    add(cut_extrude10_tool3.solids().sort_by_distance((-2.10061, 0, -35))[0], mode=Mode.SUBTRACT)
    add(cut_extrude10_tool4.solids().sort_by_distance((-2.10061, 0, -65))[0], mode=Mode.SUBTRACT)


solid = part.part
